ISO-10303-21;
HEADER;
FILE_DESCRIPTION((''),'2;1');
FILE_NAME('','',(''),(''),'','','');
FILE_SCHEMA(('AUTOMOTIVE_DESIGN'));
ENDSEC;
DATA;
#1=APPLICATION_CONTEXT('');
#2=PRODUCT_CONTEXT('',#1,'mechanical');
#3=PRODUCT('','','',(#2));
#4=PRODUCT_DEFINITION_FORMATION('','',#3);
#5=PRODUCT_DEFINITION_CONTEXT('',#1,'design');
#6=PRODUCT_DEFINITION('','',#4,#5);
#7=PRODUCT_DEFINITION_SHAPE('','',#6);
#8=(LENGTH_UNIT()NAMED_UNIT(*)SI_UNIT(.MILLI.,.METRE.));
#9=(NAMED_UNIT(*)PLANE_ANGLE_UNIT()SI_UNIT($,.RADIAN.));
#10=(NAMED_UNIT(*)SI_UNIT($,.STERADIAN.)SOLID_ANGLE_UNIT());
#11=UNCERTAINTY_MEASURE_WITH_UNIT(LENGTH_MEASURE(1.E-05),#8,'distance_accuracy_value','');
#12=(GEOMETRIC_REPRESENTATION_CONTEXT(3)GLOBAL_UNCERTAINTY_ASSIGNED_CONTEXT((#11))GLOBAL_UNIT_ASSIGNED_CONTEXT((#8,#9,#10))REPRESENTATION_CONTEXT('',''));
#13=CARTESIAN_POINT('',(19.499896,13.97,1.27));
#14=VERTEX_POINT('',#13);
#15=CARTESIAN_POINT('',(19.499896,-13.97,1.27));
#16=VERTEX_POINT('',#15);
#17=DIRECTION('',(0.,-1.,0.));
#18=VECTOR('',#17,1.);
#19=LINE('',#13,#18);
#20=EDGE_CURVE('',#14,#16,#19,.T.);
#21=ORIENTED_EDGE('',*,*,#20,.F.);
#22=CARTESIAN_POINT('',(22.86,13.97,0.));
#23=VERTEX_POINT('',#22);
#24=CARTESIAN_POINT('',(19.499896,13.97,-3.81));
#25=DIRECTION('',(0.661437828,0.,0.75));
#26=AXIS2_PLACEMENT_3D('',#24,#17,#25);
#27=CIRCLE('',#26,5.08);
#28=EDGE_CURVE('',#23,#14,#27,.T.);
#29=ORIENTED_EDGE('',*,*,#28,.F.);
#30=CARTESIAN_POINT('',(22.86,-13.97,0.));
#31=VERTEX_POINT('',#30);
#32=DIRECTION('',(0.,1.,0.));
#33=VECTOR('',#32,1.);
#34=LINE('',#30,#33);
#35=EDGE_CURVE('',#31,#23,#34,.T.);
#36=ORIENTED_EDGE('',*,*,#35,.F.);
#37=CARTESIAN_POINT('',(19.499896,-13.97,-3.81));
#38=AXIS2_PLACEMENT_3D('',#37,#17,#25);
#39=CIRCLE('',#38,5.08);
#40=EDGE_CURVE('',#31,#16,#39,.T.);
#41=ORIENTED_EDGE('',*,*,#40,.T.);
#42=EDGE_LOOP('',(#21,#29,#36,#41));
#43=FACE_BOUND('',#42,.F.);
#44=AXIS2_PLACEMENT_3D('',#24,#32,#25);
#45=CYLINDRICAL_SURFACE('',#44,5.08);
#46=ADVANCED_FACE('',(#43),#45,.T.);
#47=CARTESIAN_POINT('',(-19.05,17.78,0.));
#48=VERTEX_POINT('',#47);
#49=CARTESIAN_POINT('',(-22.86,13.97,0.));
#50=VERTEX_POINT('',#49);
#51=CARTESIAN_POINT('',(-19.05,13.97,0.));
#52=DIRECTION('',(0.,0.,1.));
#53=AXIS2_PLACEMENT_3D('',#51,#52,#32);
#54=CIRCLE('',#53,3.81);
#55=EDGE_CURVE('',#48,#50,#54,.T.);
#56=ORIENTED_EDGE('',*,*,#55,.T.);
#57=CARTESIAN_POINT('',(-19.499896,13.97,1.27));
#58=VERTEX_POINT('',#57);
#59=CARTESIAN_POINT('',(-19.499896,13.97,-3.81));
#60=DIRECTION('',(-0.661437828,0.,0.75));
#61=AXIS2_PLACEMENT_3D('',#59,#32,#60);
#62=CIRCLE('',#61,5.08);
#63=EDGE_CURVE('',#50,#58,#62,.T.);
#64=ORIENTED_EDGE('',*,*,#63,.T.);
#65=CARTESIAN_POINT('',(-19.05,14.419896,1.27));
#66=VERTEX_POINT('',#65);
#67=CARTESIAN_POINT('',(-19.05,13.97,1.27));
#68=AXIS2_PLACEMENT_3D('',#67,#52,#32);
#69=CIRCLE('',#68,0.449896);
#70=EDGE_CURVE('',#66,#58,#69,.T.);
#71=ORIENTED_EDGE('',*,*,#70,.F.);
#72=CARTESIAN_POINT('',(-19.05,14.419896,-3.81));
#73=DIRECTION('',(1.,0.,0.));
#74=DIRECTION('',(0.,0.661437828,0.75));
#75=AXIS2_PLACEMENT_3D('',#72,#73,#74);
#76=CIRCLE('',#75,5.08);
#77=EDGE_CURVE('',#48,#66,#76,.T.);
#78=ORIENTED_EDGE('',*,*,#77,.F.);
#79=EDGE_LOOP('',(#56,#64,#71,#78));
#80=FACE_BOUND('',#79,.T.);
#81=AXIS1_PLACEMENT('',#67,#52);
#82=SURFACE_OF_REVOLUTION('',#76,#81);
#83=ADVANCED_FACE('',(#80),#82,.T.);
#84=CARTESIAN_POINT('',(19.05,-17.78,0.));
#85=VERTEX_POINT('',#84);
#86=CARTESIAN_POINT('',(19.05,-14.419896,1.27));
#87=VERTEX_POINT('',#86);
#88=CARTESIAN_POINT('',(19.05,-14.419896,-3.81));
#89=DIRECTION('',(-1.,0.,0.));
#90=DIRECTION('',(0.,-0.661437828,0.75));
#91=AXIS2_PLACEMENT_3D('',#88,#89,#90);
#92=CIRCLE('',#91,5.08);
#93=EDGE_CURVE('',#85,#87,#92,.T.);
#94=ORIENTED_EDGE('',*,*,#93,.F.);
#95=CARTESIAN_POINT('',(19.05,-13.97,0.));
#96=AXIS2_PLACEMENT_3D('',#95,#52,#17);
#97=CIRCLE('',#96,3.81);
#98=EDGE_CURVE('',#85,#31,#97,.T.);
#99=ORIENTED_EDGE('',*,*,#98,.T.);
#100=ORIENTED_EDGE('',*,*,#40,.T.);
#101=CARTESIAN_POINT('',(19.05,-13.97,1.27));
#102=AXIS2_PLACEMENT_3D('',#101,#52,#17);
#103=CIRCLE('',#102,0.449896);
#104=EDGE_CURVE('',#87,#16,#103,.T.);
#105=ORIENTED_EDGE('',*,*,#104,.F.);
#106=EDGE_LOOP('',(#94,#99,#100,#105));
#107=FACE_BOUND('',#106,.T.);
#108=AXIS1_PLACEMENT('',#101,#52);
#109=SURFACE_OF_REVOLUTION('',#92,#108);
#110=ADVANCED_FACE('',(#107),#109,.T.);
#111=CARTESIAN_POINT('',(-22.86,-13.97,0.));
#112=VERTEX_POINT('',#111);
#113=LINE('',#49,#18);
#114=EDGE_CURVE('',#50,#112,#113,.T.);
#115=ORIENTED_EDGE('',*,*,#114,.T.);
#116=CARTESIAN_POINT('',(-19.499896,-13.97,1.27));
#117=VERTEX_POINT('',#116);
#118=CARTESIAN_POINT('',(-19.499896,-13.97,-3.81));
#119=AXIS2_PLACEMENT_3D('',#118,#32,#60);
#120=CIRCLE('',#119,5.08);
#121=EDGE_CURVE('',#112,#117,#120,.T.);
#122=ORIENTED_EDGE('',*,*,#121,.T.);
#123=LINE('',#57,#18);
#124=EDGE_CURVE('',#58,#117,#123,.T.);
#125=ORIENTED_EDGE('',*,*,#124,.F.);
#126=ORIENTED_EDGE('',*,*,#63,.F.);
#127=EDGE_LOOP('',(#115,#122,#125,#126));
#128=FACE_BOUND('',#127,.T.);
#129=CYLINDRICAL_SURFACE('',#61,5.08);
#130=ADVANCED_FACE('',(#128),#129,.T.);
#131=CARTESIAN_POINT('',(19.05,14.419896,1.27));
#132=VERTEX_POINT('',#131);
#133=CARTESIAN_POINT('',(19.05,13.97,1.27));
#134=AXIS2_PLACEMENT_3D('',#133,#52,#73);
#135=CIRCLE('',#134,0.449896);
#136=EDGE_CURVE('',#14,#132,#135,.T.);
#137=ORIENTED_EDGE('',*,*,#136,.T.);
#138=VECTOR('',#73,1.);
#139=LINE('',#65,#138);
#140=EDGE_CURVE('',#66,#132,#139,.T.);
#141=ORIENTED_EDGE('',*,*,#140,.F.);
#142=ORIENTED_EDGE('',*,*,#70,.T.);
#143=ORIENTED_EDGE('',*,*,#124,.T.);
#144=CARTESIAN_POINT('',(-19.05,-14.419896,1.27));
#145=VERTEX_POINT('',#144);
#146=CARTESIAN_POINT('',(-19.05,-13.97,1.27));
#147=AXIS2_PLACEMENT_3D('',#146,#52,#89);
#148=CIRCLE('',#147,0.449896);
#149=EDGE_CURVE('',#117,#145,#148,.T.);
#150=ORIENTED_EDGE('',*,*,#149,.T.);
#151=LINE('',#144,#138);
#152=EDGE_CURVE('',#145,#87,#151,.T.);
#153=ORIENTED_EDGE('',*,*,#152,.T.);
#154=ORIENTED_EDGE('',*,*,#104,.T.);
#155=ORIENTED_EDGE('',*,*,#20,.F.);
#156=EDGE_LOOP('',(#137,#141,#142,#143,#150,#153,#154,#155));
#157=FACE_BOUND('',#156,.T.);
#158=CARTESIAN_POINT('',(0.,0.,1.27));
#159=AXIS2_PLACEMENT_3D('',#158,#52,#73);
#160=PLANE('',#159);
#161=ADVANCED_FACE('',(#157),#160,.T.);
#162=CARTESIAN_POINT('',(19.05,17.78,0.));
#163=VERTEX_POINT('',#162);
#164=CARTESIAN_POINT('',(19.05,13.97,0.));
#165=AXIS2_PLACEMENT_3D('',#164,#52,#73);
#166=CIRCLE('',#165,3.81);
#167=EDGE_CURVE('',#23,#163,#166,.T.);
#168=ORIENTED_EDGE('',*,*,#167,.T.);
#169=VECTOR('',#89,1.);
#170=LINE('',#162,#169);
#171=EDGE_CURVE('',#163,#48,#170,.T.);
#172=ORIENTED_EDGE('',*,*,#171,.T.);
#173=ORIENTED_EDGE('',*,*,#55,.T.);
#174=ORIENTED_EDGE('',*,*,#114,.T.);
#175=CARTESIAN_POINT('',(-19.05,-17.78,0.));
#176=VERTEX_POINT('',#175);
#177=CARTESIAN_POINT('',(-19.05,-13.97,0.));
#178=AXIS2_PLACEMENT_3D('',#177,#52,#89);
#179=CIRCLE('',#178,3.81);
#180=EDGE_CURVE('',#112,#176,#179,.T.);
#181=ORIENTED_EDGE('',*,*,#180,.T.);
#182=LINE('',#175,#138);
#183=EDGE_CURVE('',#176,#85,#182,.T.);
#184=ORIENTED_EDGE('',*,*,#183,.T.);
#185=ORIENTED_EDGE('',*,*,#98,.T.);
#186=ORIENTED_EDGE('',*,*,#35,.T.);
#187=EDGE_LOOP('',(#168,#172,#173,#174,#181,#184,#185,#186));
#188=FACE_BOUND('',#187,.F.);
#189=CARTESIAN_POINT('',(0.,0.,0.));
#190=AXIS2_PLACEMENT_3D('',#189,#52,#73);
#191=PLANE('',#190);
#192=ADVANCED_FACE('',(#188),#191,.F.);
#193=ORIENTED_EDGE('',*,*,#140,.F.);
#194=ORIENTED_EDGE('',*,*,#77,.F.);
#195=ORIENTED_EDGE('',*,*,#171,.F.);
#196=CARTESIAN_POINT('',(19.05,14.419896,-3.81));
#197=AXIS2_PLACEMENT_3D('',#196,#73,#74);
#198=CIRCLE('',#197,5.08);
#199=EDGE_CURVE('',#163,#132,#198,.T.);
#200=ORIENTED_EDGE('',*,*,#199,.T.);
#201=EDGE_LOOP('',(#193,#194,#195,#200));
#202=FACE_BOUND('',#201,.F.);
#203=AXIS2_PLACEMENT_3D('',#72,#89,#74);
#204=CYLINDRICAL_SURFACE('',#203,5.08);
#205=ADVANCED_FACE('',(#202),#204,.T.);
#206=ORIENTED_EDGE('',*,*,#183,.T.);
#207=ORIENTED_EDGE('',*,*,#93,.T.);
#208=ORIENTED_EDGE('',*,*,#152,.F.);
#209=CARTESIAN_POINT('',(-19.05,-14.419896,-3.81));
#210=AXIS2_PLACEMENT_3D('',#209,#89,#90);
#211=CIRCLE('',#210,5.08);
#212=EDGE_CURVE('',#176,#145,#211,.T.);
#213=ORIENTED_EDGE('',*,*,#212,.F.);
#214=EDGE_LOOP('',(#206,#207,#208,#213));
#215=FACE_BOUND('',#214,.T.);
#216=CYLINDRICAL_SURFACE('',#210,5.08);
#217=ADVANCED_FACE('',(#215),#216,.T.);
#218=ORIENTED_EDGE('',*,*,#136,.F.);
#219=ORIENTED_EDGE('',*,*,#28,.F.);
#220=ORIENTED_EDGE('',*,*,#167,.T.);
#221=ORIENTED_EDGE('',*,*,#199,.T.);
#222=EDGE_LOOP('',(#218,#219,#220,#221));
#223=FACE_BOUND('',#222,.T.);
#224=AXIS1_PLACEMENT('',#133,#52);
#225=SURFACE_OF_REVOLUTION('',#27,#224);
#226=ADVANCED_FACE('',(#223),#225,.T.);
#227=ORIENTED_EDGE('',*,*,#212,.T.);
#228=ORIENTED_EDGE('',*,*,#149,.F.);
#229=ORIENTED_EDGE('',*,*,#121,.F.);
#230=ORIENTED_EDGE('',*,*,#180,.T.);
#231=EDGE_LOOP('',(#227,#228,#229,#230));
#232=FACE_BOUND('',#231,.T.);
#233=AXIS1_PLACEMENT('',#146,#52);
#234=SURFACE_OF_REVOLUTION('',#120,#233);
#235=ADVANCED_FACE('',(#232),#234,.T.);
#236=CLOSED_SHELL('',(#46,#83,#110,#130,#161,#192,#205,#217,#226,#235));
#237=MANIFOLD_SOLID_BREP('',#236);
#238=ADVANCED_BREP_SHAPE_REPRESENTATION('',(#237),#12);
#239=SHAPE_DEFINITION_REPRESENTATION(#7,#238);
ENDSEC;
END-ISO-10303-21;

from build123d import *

# Parameters (mm, degrees)
F1_DEPTH     = 1.27
F2_T1_DEPTH  = 27.94
F2_T3_DEPTH  = 38.1
F2_T6_ANGLE  = 90
F2_T8_ANGLE  = 90
F2_T10_ANGLE = 90
F2_T12_ANGLE = 90


# Not quite as in the source:
# - a fillet or chamfer that OpenCascade refuses, or shapes differently, is made with other operations: its cross-section is extruded or revolved along the edge and cut away or added


with BuildPart() as f1:
    # F0 (on Top) → F1 (new body)
    with BuildSketch(Plane.XY):
        with BuildLine():
            ThreePointArc((22.86, 13.97), (21.7440768363, 16.6640768363), (19.05, 17.78))
            Line((19.05, 17.78), (-19.05, 17.78))
            ThreePointArc((-19.05, 17.78), (-21.7440768363, 16.6640768363), (-22.86, 13.97))
            Line((-22.86, 13.97), (-22.86, -13.97))
            ThreePointArc((-22.86, -13.97), (-21.7440768363, -16.6640768363), (-19.05, -17.78))
            Line((-19.05, -17.78), (19.05, -17.78))
            ThreePointArc((19.05, -17.78), (21.7440768363, -16.6640768363), (22.86, -13.97))
            Line((22.86, -13.97), (22.86, 13.97))
        make_face()
    extrude(amount=F1_DEPTH)

    # F2: fillet of radius 5.08 on 1 edges, made by hand

    # F2_s2 → F2_t1 (cut)
    with BuildSketch(Plane.XZ.offset(-13.97)):
        with BuildLine():
            ThreePointArc((-22.86, 0), (-21.2959470592, 0.9419048812), (-19.4998958349, 1.27))
            Line((-19.4998958349, 1.27), (-22.86, 1.27))
            Line((-22.86, 1.27), (-22.86, 0))
        make_face()
        with BuildLine():
            ThreePointArc((22.86, 0), (21.2959470592, 0.9419048812), (19.4998958349, 1.27))
            Line((19.4998958349, 1.27), (22.86, 1.27))
            Line((22.86, 1.27), (22.86, 0))
        make_face()
    extrude(amount=F2_T1_DEPTH, mode=Mode.SUBTRACT)

    # F2_s4 → F2_t3 (cut)
    with BuildSketch(Plane.YZ.offset(-19.05)):
        with BuildLine():
            ThreePointArc((-17.78, 0), (-16.2159470592, 0.9419048812), (-14.4198958349, 1.27))
            Line((-14.4198958349, 1.27), (-17.78, 1.27))
            Line((-17.78, 1.27), (-17.78, 0))
        make_face()
        with BuildLine():
            ThreePointArc((17.78, 0), (16.2159470592, 0.9419048812), (14.4198958349, 1.27))
            Line((14.4198958349, 1.27), (17.78, 1.27))
            Line((17.78, 1.27), (17.78, 0))
        make_face()
    extrude(amount=F2_T3_DEPTH, mode=Mode.SUBTRACT)

    # F2_s5 → F2_t6 (revolve, cut)
    with BuildSketch(Plane.YZ.offset(-19.05)):
        with BuildLine():
            ThreePointArc((17.78, 0), (16.2159470592, 0.9419048812), (14.4198958349, 1.27))
            Line((14.4198958349, 1.27), (17.78, 1.27))
            Line((17.78, 1.27), (17.78, 0))
        make_face()
    revolve(axis=Axis((-19.05, 13.97, 1.27), (0, 0, 1)), revolution_arc=F2_T6_ANGLE, mode=Mode.SUBTRACT)

    # F2_s7 → F2_t8 (revolve, cut)
    with BuildSketch(Plane.XZ.offset(13.97)):
        with BuildLine():
            ThreePointArc((-22.86, 0), (-21.2959470592, 0.9419048812), (-19.4998958349, 1.27))
            Line((-19.4998958349, 1.27), (-22.86, 1.27))
            Line((-22.86, 1.27), (-22.86, 0))
        make_face()
    revolve(axis=Axis((-19.05, -13.97, 1.27), (0, 0, 1)), revolution_arc=F2_T8_ANGLE, mode=Mode.SUBTRACT)

    # F2_s9 → F2_t10 (revolve, cut)
    with BuildSketch(Plane.YZ.offset(19.05)):
        with BuildLine():
            ThreePointArc((-17.78, 0), (-16.2159470592, 0.9419048812), (-14.4198958349, 1.27))
            Line((-14.4198958349, 1.27), (-17.78, 1.27))
            Line((-17.78, 1.27), (-17.78, 0))
        make_face()
    revolve(axis=Axis((19.05, -13.97, 1.27), (0, 0, 1)), revolution_arc=F2_T10_ANGLE, mode=Mode.SUBTRACT)

    # F2_s11 → F2_t12 (revolve, cut)
    with BuildSketch(Plane.XZ.offset(-13.97)):
        with BuildLine():
            ThreePointArc((22.86, 0), (21.2959470592, 0.9419048812), (19.4998958349, 1.27))
            Line((19.4998958349, 1.27), (22.86, 1.27))
            Line((22.86, 1.27), (22.86, 0))
        make_face()
    revolve(axis=Axis((19.05, 13.97, 1.27), (0, 0, 1)), revolution_arc=F2_T12_ANGLE, mode=Mode.SUBTRACT)


solid = f1.part
